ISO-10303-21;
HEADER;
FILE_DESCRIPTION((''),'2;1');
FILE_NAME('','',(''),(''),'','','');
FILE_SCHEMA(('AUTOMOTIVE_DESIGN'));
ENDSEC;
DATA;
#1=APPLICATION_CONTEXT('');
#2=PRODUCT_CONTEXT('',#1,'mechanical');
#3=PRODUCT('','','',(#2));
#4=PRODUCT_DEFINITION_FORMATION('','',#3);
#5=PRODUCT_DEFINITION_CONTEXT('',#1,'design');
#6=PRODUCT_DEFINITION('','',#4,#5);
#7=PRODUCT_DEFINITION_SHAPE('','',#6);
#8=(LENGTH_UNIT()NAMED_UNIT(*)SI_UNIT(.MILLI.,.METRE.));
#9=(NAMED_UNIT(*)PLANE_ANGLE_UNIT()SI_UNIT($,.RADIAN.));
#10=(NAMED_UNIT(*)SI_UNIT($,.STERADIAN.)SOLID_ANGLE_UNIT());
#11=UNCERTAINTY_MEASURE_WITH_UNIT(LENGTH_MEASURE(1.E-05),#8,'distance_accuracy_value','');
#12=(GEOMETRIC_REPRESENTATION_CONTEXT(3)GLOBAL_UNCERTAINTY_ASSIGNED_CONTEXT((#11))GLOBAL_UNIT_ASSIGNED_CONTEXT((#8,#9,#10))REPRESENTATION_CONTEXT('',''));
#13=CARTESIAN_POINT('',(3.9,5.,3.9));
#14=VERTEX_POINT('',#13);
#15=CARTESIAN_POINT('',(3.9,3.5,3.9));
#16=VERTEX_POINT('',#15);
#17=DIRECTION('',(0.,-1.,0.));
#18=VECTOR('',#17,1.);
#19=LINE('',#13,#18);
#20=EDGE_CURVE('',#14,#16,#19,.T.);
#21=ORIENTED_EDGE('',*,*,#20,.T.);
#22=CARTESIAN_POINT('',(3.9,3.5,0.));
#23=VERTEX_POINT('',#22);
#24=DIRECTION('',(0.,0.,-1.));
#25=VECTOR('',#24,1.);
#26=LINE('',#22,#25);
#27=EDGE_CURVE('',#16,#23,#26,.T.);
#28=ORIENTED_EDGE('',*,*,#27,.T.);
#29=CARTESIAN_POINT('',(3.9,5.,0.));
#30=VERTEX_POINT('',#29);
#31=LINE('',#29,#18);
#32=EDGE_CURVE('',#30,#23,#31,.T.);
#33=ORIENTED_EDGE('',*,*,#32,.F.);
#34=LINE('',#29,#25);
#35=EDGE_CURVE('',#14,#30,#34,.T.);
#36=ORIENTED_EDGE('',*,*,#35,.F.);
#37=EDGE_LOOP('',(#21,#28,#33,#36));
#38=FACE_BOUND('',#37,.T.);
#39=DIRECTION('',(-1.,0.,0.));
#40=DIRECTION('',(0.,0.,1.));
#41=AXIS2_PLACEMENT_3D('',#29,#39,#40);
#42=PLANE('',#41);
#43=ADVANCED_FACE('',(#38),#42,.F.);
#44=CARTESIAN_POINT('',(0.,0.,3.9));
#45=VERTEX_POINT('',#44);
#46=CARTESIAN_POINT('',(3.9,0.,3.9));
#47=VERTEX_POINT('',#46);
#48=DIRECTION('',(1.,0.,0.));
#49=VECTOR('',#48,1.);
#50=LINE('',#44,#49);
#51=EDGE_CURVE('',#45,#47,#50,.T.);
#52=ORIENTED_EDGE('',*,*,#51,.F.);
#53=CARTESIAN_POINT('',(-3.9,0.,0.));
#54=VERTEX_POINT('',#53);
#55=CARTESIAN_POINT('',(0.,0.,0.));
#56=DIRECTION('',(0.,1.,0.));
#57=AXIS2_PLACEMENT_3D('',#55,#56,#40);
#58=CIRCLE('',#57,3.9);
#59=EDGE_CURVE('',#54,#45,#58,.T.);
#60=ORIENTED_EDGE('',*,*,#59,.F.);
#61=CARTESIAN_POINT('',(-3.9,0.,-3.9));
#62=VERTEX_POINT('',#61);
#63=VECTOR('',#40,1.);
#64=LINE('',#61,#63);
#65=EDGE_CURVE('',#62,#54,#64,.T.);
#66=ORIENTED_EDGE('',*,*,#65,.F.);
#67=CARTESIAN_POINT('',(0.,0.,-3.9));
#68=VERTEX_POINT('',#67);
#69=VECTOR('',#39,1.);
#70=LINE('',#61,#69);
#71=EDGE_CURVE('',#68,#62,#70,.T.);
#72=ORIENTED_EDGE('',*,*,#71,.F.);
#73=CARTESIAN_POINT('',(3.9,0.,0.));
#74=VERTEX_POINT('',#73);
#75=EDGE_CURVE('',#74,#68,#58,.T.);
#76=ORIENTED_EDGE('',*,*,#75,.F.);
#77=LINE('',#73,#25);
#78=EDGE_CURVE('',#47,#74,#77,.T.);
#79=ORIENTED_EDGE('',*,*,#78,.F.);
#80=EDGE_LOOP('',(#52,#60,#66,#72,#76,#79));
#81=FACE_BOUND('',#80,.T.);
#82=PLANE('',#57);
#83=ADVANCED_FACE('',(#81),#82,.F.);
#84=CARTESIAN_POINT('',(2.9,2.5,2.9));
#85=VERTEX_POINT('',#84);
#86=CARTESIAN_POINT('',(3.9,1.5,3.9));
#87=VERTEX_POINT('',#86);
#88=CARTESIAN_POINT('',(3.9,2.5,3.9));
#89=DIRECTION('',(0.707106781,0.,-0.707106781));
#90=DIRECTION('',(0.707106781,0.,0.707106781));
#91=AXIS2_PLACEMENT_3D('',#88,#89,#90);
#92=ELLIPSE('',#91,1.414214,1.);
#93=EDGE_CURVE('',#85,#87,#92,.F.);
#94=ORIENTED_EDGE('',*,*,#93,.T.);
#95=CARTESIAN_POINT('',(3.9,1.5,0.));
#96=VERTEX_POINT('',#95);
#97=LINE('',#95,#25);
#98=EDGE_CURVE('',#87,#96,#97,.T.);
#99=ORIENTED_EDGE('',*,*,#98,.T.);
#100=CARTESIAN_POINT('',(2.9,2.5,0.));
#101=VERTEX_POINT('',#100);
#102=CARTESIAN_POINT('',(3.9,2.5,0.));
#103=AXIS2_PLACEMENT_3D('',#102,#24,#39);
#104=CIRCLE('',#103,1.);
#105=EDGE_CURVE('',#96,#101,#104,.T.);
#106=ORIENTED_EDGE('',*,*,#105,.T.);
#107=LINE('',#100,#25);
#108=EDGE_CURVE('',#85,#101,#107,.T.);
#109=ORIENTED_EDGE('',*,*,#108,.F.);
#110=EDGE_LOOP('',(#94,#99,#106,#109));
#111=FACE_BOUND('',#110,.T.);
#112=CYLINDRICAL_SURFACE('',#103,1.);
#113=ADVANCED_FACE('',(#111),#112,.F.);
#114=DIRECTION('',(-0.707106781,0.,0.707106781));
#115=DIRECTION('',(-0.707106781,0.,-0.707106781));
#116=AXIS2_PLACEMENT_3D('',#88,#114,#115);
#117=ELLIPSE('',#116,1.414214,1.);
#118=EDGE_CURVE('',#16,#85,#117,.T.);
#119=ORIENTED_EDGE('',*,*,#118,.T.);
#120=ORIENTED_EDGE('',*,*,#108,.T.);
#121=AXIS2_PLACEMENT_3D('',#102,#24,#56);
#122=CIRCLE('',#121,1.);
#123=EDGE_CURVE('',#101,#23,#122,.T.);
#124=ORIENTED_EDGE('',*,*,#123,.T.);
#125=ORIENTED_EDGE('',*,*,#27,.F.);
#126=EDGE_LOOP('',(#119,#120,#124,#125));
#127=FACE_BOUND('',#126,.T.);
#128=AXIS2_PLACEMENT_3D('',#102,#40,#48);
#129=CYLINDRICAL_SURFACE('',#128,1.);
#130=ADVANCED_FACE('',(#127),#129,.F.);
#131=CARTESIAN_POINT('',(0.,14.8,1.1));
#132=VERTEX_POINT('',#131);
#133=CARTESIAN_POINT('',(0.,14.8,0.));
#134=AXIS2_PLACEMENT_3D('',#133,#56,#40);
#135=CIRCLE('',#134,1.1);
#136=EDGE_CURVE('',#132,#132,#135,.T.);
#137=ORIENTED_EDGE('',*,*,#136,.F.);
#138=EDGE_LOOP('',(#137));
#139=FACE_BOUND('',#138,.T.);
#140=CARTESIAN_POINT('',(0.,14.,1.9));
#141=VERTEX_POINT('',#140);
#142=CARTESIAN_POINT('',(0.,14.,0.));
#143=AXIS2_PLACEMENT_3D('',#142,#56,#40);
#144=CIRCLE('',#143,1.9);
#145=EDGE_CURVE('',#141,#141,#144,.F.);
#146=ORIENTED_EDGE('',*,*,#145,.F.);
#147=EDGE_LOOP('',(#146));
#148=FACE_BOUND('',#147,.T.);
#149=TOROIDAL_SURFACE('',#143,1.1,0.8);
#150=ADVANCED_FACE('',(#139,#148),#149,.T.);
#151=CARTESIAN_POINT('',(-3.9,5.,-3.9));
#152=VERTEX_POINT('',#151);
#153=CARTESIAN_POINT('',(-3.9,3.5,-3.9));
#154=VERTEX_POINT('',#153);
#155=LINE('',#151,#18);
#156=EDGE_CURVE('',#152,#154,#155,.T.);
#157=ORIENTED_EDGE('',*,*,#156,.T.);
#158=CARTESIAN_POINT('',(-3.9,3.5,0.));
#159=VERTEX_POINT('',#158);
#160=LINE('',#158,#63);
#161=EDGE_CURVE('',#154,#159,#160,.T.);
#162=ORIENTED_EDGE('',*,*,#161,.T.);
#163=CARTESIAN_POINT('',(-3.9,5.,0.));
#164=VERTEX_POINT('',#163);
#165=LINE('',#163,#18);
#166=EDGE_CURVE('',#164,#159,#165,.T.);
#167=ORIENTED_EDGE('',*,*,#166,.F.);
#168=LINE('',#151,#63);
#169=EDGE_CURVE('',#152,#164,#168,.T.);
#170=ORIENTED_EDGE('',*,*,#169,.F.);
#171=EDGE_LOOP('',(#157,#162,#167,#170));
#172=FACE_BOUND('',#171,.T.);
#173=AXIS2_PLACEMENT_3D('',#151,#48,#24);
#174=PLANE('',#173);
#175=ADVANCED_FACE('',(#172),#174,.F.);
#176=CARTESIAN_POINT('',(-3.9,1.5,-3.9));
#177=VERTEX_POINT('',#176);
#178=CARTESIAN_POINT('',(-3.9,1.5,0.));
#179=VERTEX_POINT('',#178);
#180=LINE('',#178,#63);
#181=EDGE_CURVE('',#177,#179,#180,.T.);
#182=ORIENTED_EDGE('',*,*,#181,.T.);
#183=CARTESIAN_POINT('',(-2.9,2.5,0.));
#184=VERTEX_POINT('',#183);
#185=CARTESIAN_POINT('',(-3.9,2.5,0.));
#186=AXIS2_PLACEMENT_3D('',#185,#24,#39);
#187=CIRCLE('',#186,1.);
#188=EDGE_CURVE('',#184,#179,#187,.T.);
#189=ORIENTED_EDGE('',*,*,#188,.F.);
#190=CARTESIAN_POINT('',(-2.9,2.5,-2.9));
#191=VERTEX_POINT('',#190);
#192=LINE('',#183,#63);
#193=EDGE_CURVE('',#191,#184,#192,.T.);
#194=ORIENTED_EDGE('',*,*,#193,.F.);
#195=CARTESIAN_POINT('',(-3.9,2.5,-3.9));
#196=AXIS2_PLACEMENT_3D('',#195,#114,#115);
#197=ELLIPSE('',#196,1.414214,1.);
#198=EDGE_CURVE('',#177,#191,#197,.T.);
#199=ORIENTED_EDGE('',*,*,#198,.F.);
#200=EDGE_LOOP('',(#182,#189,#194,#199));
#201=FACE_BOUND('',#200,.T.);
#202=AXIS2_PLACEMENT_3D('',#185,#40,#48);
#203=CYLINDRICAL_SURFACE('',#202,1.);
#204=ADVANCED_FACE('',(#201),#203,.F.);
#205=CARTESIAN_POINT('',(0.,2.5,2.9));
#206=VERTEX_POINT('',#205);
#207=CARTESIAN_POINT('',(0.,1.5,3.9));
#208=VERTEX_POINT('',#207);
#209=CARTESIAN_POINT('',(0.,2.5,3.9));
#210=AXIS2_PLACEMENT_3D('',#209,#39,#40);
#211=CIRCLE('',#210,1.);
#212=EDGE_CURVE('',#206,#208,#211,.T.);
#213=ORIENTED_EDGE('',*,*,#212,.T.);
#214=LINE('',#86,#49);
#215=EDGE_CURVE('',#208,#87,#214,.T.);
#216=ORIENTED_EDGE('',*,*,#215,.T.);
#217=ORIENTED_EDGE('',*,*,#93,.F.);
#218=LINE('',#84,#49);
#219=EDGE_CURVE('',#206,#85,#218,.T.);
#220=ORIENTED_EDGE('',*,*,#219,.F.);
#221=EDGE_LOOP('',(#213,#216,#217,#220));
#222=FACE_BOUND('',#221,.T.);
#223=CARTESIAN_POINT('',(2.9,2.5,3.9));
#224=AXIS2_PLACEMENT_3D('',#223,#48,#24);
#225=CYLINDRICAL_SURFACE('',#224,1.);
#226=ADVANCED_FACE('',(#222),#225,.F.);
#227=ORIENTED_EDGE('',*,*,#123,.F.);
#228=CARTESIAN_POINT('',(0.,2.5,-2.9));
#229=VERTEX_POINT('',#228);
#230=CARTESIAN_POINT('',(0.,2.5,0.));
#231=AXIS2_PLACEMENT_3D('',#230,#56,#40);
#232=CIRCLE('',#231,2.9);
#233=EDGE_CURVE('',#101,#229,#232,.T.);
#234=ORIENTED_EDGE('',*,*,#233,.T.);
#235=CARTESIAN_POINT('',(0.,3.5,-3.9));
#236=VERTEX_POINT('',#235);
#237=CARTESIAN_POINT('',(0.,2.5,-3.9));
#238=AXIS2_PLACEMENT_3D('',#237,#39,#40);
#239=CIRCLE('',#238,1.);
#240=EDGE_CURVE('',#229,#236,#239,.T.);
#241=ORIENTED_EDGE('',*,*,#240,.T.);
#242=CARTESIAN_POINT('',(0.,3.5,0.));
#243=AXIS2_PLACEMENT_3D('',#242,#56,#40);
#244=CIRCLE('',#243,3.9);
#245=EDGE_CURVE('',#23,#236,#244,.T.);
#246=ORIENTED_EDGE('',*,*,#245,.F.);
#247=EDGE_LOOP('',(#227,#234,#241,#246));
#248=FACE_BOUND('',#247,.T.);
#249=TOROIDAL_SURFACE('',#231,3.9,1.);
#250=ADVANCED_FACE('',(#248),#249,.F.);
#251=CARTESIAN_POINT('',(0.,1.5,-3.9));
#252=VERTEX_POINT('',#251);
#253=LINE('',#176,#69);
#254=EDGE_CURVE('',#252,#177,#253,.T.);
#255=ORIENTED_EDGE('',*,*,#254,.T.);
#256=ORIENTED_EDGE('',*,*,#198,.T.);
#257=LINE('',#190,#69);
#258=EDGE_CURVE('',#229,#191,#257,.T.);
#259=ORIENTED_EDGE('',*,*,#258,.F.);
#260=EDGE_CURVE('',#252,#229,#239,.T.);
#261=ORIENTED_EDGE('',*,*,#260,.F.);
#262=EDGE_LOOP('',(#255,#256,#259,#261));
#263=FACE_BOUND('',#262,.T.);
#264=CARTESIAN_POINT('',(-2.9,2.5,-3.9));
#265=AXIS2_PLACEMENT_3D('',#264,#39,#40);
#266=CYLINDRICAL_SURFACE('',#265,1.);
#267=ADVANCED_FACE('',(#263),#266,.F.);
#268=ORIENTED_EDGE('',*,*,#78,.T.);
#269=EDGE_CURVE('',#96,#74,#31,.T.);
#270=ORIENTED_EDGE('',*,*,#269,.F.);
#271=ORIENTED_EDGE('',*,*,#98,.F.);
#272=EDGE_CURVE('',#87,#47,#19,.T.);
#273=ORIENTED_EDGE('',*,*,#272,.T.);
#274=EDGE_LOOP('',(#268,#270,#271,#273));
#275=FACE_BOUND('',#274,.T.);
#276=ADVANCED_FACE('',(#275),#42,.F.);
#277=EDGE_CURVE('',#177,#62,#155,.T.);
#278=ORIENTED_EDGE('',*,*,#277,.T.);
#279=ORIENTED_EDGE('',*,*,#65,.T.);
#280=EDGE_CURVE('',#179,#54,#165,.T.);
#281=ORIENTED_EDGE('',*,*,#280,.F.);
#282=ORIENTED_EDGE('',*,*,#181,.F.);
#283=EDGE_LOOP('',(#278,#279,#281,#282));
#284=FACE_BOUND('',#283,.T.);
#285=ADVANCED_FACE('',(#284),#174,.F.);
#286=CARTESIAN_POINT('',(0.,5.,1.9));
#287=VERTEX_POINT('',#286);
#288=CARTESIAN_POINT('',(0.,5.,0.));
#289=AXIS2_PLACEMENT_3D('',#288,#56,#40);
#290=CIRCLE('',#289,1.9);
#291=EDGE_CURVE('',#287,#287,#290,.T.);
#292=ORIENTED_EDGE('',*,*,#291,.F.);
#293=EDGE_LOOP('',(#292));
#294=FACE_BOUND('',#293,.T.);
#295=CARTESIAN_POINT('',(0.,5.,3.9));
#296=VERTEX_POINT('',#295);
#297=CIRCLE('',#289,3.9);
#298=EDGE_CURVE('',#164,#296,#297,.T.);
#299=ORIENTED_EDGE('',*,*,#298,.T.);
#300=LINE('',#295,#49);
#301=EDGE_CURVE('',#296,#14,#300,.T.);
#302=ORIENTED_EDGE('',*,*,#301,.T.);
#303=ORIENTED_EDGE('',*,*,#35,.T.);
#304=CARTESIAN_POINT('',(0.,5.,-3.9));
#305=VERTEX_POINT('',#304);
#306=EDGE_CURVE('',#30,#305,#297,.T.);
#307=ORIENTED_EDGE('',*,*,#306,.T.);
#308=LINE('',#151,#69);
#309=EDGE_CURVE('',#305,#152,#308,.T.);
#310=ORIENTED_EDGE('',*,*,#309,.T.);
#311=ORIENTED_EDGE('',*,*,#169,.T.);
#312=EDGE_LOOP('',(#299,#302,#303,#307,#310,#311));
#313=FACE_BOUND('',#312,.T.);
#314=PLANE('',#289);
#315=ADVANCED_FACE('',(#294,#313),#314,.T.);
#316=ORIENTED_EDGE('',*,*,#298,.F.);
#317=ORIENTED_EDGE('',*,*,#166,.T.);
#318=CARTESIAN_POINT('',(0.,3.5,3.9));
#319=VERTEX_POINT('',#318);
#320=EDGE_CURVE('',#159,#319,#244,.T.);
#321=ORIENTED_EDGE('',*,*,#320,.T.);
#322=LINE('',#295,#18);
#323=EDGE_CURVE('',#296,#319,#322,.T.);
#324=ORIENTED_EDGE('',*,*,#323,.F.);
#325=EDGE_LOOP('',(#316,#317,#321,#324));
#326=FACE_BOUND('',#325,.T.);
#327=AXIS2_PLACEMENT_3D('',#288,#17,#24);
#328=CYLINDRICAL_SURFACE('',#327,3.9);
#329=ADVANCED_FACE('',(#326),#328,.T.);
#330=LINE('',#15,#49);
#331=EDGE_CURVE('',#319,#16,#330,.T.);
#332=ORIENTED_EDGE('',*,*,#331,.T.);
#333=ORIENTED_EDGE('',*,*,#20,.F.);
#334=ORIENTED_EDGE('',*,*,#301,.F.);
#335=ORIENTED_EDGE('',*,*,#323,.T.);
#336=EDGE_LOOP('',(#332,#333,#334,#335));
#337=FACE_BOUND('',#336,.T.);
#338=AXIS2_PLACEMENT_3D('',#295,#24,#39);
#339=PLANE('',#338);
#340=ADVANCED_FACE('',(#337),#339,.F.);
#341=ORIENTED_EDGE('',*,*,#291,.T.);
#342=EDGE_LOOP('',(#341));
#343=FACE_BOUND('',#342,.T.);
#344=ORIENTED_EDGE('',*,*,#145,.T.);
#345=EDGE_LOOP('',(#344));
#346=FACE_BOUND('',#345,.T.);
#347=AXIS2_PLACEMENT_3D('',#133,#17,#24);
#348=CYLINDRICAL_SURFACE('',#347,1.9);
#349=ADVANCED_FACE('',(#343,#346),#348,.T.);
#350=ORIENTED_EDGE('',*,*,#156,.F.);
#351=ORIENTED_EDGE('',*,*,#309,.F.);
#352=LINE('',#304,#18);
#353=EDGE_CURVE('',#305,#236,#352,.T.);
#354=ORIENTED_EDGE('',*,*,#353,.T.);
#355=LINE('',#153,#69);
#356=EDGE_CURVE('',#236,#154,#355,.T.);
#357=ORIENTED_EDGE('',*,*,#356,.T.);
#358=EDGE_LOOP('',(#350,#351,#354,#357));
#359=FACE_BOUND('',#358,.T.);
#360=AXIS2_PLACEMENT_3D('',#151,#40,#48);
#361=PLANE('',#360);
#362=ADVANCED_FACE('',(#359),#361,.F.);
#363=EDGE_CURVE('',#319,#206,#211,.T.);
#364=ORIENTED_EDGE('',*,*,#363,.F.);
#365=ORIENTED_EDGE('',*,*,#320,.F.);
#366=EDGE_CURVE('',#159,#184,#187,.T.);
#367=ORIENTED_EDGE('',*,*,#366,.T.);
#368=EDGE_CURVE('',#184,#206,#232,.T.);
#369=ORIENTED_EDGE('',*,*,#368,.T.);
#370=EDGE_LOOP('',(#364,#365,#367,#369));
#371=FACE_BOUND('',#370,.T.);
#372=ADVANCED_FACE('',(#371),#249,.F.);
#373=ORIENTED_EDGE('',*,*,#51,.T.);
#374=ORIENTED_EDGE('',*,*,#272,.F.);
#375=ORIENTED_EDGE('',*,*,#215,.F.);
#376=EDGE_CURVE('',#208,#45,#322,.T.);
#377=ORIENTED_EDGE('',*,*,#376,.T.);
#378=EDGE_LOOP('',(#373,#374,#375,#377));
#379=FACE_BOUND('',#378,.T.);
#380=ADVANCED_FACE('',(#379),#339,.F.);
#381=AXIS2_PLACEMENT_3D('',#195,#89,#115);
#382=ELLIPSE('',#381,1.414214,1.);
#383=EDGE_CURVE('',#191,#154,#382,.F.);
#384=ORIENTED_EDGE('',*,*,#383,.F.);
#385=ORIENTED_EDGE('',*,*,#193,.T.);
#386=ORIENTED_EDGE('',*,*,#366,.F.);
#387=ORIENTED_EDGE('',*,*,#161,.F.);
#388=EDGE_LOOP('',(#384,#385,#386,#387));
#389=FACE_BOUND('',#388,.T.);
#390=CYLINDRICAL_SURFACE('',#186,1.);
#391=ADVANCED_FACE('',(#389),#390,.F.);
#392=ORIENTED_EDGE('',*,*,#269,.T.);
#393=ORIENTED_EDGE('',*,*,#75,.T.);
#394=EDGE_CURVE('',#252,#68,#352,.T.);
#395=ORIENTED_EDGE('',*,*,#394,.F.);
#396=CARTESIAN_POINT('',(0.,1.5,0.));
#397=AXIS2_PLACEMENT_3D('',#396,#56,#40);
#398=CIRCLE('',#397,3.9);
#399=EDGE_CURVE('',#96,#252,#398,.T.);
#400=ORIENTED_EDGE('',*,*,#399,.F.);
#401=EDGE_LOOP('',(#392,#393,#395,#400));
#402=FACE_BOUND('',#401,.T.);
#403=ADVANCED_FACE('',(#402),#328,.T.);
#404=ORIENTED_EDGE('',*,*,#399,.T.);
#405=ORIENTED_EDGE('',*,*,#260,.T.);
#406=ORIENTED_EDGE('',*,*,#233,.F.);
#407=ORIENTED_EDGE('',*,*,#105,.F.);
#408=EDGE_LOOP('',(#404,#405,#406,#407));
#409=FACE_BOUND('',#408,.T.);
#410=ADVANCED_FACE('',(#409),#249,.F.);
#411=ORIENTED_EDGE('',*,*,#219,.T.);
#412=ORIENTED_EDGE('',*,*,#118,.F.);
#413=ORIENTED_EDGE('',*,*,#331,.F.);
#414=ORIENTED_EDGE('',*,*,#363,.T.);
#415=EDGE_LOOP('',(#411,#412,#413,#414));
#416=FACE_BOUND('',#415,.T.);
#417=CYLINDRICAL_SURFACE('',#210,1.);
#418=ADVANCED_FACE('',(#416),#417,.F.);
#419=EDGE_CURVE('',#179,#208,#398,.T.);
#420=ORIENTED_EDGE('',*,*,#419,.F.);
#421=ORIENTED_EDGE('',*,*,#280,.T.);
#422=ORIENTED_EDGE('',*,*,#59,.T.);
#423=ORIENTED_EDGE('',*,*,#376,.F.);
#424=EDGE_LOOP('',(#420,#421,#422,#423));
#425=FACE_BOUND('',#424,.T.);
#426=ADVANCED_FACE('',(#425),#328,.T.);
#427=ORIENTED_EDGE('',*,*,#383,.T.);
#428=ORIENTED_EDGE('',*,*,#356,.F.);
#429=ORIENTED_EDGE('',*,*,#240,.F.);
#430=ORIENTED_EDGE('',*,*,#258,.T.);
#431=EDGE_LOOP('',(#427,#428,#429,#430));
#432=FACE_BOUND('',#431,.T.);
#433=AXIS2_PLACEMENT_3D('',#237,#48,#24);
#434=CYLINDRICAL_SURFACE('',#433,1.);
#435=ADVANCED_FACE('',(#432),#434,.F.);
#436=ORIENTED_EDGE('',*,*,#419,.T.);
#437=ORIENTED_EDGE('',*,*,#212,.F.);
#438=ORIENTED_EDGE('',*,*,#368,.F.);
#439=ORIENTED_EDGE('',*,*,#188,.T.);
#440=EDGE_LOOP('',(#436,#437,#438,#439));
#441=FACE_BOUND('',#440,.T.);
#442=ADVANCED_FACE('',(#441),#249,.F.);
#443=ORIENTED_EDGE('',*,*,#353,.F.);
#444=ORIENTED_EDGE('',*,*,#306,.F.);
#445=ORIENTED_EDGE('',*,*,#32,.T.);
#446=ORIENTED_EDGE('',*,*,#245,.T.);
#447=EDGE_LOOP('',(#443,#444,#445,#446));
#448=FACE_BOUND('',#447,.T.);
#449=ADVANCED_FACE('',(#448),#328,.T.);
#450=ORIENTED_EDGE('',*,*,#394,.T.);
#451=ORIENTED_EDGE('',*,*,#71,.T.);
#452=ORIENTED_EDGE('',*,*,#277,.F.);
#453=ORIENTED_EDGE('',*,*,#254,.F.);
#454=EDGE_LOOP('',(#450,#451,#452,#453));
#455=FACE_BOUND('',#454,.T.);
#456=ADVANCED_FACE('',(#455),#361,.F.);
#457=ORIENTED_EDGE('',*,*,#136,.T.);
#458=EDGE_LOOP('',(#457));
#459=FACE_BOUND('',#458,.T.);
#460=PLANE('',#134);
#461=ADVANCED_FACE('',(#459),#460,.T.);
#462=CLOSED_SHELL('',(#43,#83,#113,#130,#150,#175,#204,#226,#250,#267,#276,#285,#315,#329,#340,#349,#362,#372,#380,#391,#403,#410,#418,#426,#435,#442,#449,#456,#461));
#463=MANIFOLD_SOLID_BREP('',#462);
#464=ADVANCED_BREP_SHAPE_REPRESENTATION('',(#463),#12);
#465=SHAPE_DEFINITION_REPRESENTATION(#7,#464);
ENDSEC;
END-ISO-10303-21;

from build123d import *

# Parameters (mm, degrees)
BOSS_EXTRUDE1_DEPTH     = 5
SKETCH2_R               = 1.9
BOSS_EXTRUDE2_DEPTH     = 9.8
CUT_EXTRUDE2_DEPTH      = 1
CUT_EXTRUDE2_DEPTH_BACK = 1
FILLET1_R               = 1
FILLET2_R               = 0.8


with BuildPart() as part:
    # Sketch1 → Boss-Extrude1 (new body)
    with BuildSketch(Plane(origin=(0, 0, 0), x_dir=(1, 0, 0), z_dir=(0, 1, 0))):
        with BuildLine():
            Line((-3.9, 3.9), (0, 3.9))
            ThreePointArc((0, 3.9), (2.757716447, 2.757716447), (3.9, 0))
            Line((3.9, 0), (3.9, -3.9))
            Line((3.9, -3.9), (0, -3.9))
            ThreePointArc((0, -3.9), (-2.757716447, -2.757716447), (-3.9, 0))
            Line((-3.9, 0), (-3.9, 3.9))
        make_face()
    extrude(amount=BOSS_EXTRUDE1_DEPTH)

    # Sketch2 → Boss-Extrude2 (add)
    with BuildSketch(Plane(origin=(0, 5, 0), x_dir=(1, 0, 0), z_dir=(0, 1, 0))):
        with Locations(Location((0, 0, 0), (0, 0, 270))):
            Circle(SKETCH2_R)
    extrude(amount=BOSS_EXTRUDE2_DEPTH)

    # Sketch3 → Cut-Extrude2 (cut, two sides: drawn at the far end of the back side and taken through both)
    with BuildSketch(Plane(origin=(0, 2.5, 0), x_dir=(1, 0, 0), z_dir=(0, 1, 0)).offset(-CUT_EXTRUDE2_DEPTH_BACK)):
        with BuildLine():
            Line((-3.9, 0), (-3.9, 3.9))
            Line((-3.9, 3.9), (0, 3.9))
            ThreePointArc((0, 3.9), (2.757716447, 2.757716447), (3.9, 0))
            Line((3.9, 0), (3.9, -3.9))
            Line((3.9, -3.9), (0, -3.9))
            ThreePointArc((0, -3.9), (-2.757716447, -2.757716447), (-3.9, 0))
        make_face()
        with BuildLine():
            Line((-2.9, 0), (-2.9, 2.9))
            Line((-2.9, 2.9), (0, 2.9))
            ThreePointArc((0, 2.9), (2.050609665, 2.050609665), (2.9, 0))
            Line((2.9, 0), (2.9, -2.9))
            Line((2.9, -2.9), (0, -2.9))
            ThreePointArc((0, -2.9), (-2.050609665, -2.050609665), (-2.9, 0))
        make_face(mode=Mode.SUBTRACT)
    extrude(amount=CUT_EXTRUDE2_DEPTH + CUT_EXTRUDE2_DEPTH_BACK, mode=Mode.SUBTRACT)

    # Fillet1
    fillet1_edges = [part.edges().sort_by_distance(p)[0] for p in [
        (2.9, 3.5, 1.45),
        (2.050609665, 3.5, -2.050609665),
        (1.45, 3.5, 2.9),
        (-2.050609665, 3.5, 2.050609665),
        (2.9, 1.5, 1.45),
        (2.050609665, 1.5, -2.050609665),
        (-2.9, 1.5, -1.45),
        (1.45, 1.5, 2.9),
        (-1.45, 3.5, -2.9),
        (-2.9, 3.5, -1.45),
        (-1.45, 1.5, -2.9),
        (-2.050609665, 1.5, 2.050609665),
    ]]
    fillet(fillet1_edges, radius=FILLET1_R - 0.0001)  # a hair under: the kernel refuses the full size

    # Fillet2
    fillet2_edges = [part.edges().sort_by_distance(p)[0] for p in [
        (0, 14.8, -1.9),
    ]]
    fillet(fillet2_edges, radius=FILLET2_R)


solid = part.part
